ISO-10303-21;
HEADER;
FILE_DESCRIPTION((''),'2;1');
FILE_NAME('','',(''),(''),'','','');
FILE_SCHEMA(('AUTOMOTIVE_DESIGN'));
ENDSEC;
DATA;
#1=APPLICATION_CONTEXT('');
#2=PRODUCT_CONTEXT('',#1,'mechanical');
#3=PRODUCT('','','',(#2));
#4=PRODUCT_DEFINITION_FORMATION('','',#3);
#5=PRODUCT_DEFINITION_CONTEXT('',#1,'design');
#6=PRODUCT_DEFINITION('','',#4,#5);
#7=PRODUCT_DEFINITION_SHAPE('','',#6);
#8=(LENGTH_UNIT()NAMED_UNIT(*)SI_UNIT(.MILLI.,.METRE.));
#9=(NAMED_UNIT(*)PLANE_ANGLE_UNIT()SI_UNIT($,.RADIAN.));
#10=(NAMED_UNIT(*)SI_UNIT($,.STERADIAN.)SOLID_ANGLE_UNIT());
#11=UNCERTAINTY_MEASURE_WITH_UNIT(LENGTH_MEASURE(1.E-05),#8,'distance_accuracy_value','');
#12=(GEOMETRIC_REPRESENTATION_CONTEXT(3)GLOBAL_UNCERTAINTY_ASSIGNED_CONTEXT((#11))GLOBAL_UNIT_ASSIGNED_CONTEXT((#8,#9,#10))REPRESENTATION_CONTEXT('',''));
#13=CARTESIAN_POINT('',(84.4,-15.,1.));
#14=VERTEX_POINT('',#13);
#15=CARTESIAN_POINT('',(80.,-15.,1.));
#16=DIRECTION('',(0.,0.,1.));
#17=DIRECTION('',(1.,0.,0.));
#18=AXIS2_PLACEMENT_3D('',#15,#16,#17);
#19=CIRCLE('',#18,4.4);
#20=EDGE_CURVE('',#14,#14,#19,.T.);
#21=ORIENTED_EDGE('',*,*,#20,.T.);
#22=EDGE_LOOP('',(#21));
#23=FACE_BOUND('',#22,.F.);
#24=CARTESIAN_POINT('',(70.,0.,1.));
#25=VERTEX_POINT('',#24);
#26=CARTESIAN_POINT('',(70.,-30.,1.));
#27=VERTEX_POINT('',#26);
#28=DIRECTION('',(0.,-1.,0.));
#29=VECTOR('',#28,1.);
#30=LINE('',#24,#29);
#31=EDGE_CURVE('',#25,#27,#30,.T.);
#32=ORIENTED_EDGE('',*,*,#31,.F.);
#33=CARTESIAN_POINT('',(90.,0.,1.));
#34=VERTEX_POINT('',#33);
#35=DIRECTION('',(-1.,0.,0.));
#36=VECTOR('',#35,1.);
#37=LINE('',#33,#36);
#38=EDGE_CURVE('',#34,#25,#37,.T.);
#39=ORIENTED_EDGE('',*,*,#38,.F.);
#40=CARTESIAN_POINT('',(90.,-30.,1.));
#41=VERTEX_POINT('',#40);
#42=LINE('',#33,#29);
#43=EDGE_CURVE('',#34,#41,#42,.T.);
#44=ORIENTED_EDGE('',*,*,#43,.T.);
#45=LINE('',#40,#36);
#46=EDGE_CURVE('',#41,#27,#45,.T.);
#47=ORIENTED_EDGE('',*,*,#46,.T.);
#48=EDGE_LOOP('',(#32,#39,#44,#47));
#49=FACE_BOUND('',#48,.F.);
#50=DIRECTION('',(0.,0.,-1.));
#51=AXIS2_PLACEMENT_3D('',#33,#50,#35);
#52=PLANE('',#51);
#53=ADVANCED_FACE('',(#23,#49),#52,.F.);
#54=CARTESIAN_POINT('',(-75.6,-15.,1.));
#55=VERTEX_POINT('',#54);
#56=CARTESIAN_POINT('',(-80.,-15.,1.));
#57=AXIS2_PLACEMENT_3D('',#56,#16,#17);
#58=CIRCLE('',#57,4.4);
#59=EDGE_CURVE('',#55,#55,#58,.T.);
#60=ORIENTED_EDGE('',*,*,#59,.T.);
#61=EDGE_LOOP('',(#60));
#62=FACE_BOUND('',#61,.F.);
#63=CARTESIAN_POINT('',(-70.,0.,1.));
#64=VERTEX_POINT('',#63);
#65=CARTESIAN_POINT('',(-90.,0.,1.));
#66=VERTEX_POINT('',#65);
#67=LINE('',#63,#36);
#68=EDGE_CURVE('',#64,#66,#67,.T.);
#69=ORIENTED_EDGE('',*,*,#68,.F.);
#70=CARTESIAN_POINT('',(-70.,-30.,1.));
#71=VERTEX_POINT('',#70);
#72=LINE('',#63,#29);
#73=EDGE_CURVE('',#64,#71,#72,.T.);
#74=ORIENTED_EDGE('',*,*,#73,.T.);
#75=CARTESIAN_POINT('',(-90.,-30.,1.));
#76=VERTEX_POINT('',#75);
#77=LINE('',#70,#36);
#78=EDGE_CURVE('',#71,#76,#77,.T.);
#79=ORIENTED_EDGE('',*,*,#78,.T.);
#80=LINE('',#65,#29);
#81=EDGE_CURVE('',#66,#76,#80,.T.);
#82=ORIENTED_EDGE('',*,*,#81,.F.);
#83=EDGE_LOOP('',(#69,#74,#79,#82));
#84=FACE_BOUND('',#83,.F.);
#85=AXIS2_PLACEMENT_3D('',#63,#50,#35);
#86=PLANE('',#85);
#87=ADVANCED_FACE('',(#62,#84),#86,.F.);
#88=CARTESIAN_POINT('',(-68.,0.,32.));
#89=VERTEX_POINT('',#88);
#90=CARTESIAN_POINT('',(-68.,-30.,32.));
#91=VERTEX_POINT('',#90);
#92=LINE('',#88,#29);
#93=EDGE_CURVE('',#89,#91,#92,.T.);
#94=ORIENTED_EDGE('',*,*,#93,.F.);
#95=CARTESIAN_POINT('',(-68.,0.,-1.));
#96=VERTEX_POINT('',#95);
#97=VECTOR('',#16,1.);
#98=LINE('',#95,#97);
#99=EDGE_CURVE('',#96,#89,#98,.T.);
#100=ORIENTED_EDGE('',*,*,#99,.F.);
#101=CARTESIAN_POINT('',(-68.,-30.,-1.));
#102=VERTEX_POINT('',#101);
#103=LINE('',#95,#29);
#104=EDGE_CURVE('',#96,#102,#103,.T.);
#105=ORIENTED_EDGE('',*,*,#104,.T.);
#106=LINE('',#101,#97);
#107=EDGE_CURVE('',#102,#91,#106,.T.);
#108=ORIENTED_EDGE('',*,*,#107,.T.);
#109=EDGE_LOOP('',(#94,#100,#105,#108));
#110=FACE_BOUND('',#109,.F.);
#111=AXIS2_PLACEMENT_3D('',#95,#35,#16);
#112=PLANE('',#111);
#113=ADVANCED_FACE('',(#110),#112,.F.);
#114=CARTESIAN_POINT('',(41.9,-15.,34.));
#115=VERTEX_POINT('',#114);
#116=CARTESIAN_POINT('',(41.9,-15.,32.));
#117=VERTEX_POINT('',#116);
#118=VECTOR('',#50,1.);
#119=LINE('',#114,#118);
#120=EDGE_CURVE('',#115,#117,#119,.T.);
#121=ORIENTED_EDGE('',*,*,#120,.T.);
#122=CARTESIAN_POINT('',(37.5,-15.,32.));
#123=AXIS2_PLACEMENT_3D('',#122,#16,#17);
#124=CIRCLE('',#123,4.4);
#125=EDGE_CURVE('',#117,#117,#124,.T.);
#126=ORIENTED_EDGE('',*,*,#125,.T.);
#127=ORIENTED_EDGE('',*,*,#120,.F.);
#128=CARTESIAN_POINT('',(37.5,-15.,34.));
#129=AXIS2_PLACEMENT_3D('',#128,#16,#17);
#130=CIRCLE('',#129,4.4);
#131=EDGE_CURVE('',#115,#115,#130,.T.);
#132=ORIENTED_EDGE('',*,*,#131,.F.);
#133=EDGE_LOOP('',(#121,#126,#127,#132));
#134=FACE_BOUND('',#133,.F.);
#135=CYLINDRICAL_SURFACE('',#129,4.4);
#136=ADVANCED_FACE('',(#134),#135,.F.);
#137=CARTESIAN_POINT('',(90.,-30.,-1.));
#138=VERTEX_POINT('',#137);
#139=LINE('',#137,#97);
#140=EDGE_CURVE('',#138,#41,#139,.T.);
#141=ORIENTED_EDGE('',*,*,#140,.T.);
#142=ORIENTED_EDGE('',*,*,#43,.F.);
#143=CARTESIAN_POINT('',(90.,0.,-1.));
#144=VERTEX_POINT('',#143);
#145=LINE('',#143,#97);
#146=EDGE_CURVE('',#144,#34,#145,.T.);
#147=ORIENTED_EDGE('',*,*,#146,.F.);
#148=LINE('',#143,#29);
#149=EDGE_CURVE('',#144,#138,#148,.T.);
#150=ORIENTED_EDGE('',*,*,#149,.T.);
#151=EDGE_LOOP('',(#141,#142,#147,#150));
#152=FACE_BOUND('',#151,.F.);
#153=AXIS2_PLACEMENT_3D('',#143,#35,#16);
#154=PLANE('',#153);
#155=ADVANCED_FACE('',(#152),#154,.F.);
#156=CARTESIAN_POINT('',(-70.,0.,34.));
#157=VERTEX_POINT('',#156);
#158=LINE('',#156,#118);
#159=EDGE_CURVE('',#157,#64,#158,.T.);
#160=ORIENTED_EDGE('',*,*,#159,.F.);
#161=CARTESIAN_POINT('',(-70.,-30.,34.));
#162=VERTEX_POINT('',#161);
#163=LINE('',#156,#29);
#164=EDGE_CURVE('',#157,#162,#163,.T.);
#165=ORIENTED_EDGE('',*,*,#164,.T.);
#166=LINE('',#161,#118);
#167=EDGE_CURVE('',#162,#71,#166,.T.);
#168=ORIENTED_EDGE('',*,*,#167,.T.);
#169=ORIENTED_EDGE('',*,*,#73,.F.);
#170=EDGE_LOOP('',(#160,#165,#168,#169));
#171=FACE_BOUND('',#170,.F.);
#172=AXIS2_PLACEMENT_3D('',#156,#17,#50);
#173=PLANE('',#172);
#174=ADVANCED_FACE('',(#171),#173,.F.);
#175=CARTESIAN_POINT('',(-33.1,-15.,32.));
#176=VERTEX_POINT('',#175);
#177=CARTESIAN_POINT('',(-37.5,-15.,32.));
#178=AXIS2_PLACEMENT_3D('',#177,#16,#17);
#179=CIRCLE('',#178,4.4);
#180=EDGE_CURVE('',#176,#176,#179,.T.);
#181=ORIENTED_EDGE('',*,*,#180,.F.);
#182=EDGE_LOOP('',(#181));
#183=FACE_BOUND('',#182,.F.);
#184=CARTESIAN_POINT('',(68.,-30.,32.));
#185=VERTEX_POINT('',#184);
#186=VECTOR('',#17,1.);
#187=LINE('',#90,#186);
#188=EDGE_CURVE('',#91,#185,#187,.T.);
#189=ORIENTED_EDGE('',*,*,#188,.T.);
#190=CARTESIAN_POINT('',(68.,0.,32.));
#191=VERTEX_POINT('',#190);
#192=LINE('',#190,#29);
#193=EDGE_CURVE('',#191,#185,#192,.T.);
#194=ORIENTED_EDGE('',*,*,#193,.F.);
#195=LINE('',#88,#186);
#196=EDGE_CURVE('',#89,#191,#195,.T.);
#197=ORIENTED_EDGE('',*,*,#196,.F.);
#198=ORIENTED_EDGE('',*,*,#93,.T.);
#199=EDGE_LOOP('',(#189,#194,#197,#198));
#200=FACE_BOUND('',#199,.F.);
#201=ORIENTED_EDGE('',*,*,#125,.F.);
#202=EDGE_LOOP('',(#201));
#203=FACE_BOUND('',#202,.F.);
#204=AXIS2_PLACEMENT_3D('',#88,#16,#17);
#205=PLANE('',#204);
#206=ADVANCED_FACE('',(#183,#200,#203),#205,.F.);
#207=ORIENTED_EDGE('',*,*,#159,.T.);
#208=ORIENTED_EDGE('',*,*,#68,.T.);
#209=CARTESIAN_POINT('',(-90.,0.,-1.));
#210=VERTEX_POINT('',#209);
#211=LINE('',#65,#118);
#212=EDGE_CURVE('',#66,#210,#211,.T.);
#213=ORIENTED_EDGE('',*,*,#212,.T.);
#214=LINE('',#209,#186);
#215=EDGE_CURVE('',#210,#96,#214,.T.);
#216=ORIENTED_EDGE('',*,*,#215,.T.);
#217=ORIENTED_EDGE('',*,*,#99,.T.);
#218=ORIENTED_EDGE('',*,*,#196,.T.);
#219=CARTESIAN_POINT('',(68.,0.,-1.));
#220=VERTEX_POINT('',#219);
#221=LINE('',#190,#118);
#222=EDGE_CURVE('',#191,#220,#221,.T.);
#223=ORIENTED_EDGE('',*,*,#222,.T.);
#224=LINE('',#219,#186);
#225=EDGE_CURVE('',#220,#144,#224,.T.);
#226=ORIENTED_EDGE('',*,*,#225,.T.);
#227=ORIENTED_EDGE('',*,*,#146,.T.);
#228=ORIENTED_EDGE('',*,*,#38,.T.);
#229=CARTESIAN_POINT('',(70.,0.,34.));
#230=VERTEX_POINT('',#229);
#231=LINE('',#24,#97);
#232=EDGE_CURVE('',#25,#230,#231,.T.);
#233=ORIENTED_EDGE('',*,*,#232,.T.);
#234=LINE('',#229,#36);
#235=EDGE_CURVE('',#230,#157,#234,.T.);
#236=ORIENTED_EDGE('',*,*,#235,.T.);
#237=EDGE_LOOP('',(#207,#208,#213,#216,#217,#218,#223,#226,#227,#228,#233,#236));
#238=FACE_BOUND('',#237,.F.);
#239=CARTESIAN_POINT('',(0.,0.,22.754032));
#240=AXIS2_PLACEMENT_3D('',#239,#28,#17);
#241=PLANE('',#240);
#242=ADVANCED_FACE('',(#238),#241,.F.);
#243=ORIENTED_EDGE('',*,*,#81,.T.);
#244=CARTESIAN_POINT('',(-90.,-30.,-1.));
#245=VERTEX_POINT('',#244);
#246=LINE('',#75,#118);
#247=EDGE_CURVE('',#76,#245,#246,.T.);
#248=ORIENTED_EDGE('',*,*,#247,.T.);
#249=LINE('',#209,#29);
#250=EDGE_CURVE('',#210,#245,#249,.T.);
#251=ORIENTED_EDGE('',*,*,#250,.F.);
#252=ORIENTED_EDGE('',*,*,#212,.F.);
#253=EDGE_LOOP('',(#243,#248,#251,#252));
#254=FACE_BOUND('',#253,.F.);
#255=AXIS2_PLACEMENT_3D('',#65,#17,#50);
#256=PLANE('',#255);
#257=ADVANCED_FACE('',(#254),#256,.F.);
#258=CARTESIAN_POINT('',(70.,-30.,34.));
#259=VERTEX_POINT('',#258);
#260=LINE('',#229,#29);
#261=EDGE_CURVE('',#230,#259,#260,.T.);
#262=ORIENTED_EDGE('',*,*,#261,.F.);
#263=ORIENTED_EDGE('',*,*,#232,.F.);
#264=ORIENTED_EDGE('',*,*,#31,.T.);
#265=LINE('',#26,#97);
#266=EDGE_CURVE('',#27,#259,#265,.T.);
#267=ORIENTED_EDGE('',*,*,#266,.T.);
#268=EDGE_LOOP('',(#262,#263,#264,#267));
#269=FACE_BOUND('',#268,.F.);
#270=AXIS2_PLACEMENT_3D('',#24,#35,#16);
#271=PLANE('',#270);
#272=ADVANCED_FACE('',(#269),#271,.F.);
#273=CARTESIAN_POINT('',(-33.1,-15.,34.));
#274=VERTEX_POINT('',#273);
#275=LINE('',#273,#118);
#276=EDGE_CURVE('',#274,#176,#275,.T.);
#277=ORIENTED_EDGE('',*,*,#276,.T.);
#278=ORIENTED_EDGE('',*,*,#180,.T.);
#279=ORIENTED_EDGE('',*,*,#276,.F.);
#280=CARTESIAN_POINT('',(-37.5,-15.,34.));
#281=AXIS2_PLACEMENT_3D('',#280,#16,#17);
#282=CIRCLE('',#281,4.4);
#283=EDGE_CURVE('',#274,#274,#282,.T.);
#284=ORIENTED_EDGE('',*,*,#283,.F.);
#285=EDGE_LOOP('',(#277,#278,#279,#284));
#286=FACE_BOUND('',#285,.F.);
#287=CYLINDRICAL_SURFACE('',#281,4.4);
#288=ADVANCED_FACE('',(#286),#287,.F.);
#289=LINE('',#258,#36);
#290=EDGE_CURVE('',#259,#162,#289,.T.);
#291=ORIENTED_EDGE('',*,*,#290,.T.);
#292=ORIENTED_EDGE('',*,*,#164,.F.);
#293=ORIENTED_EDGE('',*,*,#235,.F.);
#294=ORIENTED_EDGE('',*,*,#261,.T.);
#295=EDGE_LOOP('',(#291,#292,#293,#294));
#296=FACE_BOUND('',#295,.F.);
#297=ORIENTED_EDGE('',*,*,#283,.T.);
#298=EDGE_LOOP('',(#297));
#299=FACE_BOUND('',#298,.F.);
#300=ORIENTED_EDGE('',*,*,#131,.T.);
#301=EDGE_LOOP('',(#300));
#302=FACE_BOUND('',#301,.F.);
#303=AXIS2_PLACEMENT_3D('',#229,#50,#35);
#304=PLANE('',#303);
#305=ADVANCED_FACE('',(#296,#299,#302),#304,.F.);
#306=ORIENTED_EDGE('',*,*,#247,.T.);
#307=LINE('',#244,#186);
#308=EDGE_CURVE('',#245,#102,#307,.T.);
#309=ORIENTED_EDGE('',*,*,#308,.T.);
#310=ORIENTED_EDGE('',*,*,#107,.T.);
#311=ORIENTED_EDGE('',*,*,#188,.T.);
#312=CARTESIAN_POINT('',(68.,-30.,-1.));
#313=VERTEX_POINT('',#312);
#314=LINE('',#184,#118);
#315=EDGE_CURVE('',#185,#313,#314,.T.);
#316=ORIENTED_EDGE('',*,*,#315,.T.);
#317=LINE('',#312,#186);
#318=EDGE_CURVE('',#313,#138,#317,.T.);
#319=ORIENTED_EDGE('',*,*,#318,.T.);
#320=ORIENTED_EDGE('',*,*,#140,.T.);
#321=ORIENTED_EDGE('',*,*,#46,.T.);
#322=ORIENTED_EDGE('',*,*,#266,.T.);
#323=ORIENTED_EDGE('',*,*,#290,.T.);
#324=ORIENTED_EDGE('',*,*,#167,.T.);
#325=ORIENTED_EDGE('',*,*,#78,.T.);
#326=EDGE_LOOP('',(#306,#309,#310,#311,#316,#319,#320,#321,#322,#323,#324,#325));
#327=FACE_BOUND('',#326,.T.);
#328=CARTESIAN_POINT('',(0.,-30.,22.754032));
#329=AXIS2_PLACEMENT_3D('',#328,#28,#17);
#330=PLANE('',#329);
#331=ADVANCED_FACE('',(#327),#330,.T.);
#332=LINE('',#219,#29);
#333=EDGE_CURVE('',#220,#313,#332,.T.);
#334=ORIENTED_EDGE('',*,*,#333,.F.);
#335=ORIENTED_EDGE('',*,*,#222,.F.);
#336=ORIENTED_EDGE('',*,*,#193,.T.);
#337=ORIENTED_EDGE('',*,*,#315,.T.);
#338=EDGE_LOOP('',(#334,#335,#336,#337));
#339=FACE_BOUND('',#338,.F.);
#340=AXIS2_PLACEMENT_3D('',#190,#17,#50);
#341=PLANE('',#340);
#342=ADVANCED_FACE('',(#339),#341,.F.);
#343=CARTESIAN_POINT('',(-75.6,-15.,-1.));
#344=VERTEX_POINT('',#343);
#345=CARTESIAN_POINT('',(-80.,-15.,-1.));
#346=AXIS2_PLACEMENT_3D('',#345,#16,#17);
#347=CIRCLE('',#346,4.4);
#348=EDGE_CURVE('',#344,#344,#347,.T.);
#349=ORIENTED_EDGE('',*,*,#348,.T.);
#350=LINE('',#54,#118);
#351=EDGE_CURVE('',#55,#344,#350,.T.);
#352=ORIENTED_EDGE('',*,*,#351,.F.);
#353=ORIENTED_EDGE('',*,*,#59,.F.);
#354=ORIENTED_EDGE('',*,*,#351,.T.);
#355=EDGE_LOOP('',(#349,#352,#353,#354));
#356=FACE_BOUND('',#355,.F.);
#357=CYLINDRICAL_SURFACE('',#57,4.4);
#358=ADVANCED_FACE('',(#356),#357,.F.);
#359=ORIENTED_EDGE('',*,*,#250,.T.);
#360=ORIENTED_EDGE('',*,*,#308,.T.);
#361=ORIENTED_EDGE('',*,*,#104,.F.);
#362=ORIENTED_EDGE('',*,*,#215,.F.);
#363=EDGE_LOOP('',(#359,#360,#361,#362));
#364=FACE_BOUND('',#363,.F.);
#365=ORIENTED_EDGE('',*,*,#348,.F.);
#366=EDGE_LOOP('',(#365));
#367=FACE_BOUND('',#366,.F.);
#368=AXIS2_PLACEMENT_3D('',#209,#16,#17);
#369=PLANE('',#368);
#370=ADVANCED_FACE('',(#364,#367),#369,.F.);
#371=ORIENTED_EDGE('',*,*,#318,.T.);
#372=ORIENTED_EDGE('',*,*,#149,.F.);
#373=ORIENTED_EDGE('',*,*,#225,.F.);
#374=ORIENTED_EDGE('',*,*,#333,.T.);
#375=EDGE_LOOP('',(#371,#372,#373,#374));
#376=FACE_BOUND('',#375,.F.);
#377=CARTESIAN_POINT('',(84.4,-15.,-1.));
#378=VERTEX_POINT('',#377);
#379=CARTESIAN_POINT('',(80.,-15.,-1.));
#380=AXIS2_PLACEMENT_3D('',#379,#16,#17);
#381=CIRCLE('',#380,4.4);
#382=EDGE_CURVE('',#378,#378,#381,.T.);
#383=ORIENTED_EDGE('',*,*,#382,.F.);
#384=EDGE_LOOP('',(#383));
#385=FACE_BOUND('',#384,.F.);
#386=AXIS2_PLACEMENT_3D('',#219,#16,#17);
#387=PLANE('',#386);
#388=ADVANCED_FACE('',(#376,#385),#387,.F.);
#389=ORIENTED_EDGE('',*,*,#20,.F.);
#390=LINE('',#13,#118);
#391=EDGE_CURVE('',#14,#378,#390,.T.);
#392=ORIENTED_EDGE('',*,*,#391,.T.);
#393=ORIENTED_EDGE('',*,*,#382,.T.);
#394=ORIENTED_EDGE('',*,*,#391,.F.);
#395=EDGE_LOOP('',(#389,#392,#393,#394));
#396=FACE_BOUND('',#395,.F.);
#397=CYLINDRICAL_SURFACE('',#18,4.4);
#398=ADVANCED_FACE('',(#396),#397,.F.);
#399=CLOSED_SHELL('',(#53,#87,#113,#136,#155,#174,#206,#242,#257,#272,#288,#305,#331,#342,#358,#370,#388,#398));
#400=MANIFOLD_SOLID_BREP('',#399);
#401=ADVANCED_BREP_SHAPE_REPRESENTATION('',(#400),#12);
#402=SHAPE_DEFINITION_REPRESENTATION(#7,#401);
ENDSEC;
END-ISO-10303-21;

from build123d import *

# Parameters (mm, degrees)
F1_DEPTH = 30
F2_R     = 4.4
F3_R     = 4.4
F4_DEPTH = 25


# Not quite as in the source:
# - a feature names something its author has since deleted; it is built from what else it names


with BuildPart() as f1:
    # F0 (on Front) → F1 (new body)
    with BuildSketch(Plane.XZ):
        Polygon((90, -1), (90, 1), (70, 1), (70, 34), (-70, 34), (-70, 1), (-90, 1), (-90, -1), (-68, -1), (-68, 32), (68, 32), (68, -1), align=None)
    extrude(amount=F1_DEPTH)

    # F2 (on face) + F3 (on face) → F4 (cut)
    with BuildSketch(Plane.XY.offset(1)):
        with Locations((-80, -15)):
            Circle(F2_R)
        with Locations((80, -15)):
            Circle(F2_R)
    with BuildSketch(Plane.XY.offset(34)):
        with Locations((-37.5, -15)):
            Circle(F3_R)
        with Locations((37.5, -15)):
            Circle(F3_R)
    extrude(amount=-F4_DEPTH, mode=Mode.SUBTRACT)


solid = f1.part
